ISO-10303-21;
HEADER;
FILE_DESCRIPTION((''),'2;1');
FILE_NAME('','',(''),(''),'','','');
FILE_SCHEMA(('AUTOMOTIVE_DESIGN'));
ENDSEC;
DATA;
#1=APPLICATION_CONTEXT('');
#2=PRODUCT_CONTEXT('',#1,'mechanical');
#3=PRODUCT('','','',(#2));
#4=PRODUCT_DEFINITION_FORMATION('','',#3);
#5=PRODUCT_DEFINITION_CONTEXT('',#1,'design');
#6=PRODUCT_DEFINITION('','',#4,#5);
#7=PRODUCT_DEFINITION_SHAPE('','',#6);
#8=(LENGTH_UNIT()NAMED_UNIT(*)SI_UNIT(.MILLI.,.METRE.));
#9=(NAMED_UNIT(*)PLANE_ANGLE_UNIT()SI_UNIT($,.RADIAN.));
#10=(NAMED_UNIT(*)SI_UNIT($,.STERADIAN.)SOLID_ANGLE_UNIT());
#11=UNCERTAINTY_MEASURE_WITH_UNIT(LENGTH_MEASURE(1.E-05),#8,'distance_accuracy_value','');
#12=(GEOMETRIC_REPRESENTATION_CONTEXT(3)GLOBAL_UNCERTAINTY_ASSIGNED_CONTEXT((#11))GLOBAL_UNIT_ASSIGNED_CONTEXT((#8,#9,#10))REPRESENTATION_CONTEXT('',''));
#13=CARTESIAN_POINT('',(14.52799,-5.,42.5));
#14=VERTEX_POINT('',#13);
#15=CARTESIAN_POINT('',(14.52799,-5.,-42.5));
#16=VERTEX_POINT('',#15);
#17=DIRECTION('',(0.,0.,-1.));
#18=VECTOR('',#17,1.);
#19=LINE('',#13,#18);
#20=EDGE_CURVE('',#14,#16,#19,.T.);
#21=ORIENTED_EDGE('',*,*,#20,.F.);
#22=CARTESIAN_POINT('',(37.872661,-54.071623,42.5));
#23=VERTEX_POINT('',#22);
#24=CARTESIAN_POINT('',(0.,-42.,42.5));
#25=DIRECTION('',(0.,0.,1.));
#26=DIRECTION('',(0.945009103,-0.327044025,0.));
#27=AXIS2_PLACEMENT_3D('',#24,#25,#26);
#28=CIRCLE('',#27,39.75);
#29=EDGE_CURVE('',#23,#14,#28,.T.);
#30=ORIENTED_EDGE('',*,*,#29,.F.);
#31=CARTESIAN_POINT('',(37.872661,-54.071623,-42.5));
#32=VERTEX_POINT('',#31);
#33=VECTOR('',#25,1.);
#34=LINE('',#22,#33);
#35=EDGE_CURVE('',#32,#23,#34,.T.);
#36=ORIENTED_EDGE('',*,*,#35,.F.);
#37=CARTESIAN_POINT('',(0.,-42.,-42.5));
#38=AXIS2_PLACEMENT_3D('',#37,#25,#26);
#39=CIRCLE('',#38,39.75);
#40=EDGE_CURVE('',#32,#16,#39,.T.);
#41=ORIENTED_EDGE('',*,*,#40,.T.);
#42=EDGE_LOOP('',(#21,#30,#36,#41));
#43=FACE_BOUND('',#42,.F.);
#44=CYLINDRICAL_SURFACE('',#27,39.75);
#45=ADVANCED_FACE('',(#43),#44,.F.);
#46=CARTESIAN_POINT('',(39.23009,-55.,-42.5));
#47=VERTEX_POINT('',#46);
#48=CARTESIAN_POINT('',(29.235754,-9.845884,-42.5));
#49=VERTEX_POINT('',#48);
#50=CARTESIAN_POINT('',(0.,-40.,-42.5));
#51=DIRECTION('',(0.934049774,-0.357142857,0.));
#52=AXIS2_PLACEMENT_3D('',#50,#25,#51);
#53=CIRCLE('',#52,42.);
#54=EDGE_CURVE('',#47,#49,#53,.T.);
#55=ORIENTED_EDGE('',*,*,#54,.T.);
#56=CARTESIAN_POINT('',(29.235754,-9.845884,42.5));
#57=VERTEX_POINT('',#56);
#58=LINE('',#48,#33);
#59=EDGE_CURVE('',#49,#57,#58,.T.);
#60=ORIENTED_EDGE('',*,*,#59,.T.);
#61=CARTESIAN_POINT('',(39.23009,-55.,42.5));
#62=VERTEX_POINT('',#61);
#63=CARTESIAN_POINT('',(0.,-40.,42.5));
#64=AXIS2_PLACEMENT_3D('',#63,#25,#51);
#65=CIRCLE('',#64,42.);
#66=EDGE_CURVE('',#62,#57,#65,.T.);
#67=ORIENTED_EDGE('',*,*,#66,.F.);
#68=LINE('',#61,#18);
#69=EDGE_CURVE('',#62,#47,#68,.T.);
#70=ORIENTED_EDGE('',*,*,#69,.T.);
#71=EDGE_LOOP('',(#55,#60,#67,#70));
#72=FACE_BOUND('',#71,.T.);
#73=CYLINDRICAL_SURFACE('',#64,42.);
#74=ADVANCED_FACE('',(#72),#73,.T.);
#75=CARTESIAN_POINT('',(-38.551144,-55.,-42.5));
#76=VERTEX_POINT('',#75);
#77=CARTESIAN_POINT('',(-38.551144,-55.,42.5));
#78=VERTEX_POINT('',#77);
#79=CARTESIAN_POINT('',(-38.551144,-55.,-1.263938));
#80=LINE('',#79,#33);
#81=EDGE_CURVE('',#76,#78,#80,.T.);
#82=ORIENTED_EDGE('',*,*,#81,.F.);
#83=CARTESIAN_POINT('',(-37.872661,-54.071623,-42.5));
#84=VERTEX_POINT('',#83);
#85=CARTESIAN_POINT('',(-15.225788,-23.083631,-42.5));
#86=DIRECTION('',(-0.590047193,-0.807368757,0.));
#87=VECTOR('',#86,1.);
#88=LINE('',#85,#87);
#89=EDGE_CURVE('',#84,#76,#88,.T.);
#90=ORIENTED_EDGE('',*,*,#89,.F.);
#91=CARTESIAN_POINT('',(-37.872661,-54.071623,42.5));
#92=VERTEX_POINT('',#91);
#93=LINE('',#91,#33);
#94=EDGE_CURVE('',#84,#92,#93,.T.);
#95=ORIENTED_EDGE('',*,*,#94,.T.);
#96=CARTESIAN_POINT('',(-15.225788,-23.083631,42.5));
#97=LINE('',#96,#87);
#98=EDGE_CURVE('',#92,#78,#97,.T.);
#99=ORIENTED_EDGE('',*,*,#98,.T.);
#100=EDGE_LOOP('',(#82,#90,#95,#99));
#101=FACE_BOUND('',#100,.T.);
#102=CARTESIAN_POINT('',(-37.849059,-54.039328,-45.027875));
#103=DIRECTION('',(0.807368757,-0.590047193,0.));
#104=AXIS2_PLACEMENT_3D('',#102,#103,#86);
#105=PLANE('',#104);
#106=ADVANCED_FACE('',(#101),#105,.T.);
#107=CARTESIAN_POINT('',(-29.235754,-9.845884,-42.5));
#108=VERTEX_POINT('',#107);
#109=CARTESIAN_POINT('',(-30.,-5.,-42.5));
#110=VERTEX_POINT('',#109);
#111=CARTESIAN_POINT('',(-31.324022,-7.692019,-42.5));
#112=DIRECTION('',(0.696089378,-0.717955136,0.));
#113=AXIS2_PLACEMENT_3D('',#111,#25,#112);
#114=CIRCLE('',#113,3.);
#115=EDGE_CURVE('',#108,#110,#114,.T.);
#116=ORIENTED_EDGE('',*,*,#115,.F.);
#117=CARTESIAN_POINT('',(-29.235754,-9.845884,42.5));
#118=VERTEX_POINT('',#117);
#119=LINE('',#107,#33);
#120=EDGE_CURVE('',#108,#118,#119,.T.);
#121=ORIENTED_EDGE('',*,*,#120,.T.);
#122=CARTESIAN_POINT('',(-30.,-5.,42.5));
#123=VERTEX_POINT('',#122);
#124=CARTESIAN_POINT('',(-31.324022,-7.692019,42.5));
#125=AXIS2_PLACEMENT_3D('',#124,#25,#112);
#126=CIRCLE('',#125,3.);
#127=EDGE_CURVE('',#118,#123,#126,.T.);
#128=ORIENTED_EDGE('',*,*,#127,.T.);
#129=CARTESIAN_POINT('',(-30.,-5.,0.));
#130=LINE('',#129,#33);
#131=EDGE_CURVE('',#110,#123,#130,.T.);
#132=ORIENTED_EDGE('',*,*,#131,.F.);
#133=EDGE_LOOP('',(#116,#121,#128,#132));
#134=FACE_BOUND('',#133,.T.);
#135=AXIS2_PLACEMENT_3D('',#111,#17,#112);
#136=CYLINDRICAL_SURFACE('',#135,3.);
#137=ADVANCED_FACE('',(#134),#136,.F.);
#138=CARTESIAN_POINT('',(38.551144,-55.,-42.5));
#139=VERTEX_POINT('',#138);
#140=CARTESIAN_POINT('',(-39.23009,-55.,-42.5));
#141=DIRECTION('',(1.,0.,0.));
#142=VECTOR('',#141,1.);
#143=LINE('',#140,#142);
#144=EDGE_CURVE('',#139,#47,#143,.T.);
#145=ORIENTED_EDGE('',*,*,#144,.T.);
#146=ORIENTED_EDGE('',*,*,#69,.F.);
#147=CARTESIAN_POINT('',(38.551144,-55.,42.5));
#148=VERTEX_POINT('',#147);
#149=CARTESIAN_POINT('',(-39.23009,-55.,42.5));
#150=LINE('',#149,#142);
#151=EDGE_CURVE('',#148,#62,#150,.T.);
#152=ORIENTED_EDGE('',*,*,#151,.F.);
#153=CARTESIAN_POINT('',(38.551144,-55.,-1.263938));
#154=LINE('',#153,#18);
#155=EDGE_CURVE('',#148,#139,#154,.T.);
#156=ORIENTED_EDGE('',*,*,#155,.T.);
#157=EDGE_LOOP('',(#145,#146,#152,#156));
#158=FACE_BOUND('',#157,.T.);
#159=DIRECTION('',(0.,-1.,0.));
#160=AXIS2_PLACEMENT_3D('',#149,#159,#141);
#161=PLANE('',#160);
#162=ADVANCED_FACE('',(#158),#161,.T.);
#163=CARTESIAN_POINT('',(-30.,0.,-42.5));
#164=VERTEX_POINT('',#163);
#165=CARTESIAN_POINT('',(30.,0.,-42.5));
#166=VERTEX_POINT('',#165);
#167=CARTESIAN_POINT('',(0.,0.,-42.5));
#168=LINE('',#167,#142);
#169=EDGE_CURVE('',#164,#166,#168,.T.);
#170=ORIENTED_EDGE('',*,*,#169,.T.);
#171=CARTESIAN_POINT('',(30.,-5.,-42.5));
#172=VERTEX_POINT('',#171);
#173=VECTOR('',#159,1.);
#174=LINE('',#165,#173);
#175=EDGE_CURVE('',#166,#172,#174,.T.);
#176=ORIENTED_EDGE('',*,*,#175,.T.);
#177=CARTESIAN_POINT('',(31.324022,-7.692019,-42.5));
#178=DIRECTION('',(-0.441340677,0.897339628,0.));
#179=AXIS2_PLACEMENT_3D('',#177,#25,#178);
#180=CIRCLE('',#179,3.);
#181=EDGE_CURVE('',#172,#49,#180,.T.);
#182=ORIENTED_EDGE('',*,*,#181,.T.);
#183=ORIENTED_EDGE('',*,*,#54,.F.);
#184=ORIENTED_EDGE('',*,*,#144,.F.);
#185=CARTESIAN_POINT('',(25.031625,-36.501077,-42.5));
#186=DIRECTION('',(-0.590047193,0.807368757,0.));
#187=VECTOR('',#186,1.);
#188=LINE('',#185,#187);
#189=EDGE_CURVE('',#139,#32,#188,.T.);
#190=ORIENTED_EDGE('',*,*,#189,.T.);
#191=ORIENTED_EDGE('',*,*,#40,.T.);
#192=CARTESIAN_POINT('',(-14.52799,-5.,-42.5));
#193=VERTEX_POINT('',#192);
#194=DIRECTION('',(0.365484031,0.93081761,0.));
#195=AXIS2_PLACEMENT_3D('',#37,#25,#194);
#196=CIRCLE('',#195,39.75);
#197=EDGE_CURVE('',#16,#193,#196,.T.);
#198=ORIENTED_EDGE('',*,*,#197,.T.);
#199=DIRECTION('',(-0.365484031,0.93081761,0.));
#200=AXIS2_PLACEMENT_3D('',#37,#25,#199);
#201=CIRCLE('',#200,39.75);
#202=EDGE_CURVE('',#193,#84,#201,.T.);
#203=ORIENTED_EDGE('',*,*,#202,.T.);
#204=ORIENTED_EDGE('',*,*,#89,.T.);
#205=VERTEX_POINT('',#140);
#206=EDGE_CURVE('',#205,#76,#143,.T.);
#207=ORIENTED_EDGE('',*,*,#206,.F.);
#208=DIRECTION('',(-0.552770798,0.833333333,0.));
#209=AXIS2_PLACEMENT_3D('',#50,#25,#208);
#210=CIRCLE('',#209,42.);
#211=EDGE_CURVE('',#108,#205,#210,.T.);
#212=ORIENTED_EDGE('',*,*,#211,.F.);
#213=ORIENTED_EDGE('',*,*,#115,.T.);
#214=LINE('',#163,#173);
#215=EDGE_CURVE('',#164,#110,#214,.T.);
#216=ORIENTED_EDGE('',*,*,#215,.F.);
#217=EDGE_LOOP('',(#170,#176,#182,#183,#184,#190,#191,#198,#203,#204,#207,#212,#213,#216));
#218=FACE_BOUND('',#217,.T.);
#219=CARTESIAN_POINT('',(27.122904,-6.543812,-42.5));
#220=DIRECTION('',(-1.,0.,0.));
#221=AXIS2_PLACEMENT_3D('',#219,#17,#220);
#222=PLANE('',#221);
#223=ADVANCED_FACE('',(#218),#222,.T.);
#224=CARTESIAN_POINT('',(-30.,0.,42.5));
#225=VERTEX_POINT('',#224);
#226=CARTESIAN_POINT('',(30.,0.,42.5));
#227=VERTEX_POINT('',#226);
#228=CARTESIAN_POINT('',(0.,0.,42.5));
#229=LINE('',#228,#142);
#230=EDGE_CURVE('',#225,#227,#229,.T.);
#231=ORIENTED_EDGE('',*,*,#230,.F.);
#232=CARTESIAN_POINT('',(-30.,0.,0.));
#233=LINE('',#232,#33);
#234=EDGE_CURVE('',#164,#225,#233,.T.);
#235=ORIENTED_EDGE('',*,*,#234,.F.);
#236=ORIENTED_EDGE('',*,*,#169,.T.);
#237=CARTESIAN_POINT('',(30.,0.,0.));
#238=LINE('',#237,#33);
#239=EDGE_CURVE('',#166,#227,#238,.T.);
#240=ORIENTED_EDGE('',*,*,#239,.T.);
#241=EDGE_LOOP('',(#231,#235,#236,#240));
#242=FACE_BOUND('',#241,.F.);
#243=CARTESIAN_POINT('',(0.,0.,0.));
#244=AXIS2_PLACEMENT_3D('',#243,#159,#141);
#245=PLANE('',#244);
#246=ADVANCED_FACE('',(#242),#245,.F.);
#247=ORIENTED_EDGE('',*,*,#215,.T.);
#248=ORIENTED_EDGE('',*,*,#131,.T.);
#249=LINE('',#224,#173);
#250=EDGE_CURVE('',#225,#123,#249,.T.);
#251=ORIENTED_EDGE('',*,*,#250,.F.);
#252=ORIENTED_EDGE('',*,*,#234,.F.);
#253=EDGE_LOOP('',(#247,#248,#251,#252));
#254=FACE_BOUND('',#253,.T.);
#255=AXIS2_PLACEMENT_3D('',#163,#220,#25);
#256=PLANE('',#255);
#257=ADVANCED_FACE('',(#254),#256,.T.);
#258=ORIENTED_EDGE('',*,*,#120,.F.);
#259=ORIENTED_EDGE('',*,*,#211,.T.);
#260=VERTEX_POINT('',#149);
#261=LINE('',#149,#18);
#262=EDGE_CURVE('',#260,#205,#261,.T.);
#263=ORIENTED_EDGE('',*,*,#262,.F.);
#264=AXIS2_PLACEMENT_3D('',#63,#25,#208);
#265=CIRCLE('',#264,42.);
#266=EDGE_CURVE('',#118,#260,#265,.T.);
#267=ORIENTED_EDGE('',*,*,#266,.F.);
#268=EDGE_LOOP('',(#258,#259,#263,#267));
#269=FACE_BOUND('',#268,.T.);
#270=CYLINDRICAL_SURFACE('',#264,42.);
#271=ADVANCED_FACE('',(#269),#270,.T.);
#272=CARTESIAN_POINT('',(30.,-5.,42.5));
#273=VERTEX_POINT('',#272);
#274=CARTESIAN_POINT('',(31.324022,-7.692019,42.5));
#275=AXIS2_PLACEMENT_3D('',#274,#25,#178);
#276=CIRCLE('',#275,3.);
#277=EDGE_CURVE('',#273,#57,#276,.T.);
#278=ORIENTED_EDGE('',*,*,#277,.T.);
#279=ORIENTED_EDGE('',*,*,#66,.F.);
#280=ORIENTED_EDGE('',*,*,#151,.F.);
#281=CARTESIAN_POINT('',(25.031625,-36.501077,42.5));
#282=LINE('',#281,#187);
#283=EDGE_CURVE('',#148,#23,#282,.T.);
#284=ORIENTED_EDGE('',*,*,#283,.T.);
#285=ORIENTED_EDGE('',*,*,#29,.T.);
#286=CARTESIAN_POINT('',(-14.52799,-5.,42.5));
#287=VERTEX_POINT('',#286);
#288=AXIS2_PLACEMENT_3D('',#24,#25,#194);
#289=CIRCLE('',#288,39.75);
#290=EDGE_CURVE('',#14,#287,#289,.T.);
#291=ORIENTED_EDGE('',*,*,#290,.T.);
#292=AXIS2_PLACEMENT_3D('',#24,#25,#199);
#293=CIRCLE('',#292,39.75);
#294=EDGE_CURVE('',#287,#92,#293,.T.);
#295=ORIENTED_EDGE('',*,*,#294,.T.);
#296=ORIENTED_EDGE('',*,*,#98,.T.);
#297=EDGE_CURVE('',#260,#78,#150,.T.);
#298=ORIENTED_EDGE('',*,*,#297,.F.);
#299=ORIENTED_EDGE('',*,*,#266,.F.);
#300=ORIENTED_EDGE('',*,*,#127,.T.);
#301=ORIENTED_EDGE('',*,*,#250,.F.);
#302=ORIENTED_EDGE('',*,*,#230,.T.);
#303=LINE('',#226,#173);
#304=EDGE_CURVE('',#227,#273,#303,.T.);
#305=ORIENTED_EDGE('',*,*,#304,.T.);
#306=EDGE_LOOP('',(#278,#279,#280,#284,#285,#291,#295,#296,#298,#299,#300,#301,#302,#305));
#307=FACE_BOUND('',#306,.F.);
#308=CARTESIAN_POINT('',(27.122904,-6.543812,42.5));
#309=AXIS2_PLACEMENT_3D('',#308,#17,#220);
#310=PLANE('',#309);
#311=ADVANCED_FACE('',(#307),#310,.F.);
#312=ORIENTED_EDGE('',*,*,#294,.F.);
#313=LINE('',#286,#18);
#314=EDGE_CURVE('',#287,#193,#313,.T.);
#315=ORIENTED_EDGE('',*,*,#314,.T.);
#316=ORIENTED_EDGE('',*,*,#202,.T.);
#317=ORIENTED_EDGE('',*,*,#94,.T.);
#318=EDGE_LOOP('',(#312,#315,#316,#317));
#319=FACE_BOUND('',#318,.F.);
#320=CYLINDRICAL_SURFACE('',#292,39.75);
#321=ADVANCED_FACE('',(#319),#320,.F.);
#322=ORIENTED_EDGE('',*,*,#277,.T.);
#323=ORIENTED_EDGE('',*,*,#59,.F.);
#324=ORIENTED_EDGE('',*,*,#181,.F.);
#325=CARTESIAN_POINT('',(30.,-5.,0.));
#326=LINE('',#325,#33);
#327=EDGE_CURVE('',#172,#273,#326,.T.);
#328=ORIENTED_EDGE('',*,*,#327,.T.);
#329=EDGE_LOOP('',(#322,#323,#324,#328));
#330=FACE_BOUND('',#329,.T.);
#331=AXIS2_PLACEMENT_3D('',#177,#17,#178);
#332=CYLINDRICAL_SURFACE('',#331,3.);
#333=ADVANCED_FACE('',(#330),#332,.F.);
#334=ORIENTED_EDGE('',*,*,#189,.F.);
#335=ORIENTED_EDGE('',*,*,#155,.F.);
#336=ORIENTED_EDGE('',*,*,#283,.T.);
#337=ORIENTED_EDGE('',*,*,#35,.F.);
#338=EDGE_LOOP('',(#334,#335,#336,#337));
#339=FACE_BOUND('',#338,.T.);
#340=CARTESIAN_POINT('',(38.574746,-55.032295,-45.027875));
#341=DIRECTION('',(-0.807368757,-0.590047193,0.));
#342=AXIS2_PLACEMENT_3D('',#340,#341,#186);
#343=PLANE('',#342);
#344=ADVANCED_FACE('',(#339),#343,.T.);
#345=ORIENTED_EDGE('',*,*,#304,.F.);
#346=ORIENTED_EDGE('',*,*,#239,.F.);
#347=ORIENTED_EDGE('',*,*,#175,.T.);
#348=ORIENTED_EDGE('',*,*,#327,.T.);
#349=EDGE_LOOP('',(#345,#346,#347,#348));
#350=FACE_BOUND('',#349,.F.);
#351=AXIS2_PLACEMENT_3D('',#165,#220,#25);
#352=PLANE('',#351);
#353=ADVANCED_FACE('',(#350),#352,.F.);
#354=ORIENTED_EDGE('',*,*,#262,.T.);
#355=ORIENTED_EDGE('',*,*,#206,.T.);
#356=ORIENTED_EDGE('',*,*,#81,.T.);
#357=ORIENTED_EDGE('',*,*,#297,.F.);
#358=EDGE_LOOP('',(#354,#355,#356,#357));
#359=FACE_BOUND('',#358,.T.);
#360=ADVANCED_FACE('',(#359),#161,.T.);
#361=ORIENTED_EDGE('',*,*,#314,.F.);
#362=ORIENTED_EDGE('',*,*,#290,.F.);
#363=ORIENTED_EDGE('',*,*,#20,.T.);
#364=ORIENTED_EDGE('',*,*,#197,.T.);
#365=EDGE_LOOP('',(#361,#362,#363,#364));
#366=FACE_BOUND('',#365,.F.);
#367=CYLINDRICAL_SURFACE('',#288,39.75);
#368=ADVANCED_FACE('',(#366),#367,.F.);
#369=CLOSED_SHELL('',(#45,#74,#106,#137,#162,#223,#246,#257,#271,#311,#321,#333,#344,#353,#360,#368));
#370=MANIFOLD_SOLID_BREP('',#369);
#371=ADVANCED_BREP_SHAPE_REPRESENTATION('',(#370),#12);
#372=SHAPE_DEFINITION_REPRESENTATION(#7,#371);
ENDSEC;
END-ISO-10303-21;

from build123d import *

# Parameters (mm, degrees)
F0_W        = 60
F0_H        = 85
F1_DEPTH    = 5
F3_DEPTH    = 85
F4_DEPTH    = 85
F5_T1_DEPTH = 85
F6_T1_DEPTH = 90.0557507085


# Not quite as in the source:
# - a fillet or chamfer that OpenCascade refuses, or shapes differently, is made with other operations: its cross-section is extruded or revolved along the edge and cut away or added


with BuildPart() as f1:
    # F0 (on Front) → F1 (new body)
    with BuildSketch(Plane.XZ):
        Rectangle(F0_W, F0_H)
    extrude(amount=F1_DEPTH)

    # F2 (on face) → F3 (join, through all)
    with BuildSketch(Plane.XY.offset(42.5)):
        with BuildLine():
            Line((-14.5279902258, -5), (-23.2163735325, -5))
            ThreePointArc((-23.2163735325, -5), (-39.9986276925, -27.1894659474), (-39.2300904919, -55))
            Line((-39.2300904919, -55), (-37.5641118623, -55))
            ThreePointArc((-37.5641118623, -55), (-36.1025868185, -25.3667283731), (-14.5279902258, -5))
        make_face()
        with BuildLine():
            Line((23.2163735325, -5), (14.5279902258, -5))
            ThreePointArc((14.5279902258, -5), (36.1025868185, -25.3667283731), (37.5641118623, -55))
            Line((37.5641118623, -55), (39.2300904919, -55))
            ThreePointArc((39.2300904919, -55), (39.9986276925, -27.1894659474), (23.2163735325, -5))
        make_face()
        with BuildLine():
            ThreePointArc((14.5279902258, -5), (0, -2.25), (-14.5279902258, -5))
            Line((-14.5279902258, -5), (14.5279902258, -5))
        make_face()
        with BuildLine():
            Line((14.5279902258, -5), (-14.5279902258, -5))
            ThreePointArc((-14.5279902258, -5), (-36.1025868185, -25.3667283731), (-37.5641118623, -55))
            Line((-37.5641118623, -55), (37.5641118623, -55))
            ThreePointArc((37.5641118623, -55), (36.1025868185, -25.3667283731), (14.5279902258, -5))
        make_face()
    extrude(amount=-F3_DEPTH)

    # F2 (on face) → F4 (cut, through all)
    with BuildSketch(Plane.XY.offset(42.5)):
        with BuildLine():
            Line((14.5279902258, -5), (-14.5279902258, -5))
            ThreePointArc((-14.5279902258, -5), (-36.1025868185, -25.3667283731), (-37.5641118623, -55))
            Line((-37.5641118623, -55), (37.5641118623, -55))
            ThreePointArc((37.5641118623, -55), (36.1025868185, -25.3667283731), (14.5279902258, -5))
        make_face()
        with BuildLine():
            ThreePointArc((14.5279902258, -5), (0, -2.25), (-14.5279902258, -5))
            Line((-14.5279902258, -5), (14.5279902258, -5))
        make_face()
    extrude(amount=-F4_DEPTH, mode=Mode.SUBTRACT)

    # F5: fillet of radius 3 on 2 edges, made by hand

    # F5_s2 → F5_t1 (join)
    with BuildSketch(Plane.XY.offset(-42.5)):
        with BuildLine():
            ThreePointArc((30, -5), (28.3606490054, -7.224664287), (29.2357538945, -9.8458842905))
            ThreePointArc((29.2357538945, -9.8458842905), (26.3377498383, -7.2842097229), (23.2163735325, -5))
            Line((23.2163735325, -5), (30, -5))
        make_face()
        with BuildLine():
            ThreePointArc((-29.2357538945, -9.8458842905), (-28.3606490054, -7.224664287), (-30, -5))
            Line((-30, -5), (-23.2163735325, -5))
            ThreePointArc((-23.2163735325, -5), (-26.3377498383, -7.2842097229), (-29.2357538945, -9.8458842905))
        make_face()
    extrude(amount=F5_T1_DEPTH)

    # F6: chamfer of 1 on 2 edges, made by hand

    # F6_s2 → F6_t1 (cut)
    with BuildSketch(Plane.XY.offset(-45.0278753542)):
        with BuildLine():
            Line((-37.8490587869, -54.0393279007), (-38.5747461473, -55.0322947503))
            Line((-38.5747461473, -55.0322947503), (-38.5747461473, -55.0522947503))
            ThreePointArc((-38.5747461473, -55.0522947503), (-38.0694290048, -55.02), (-37.5641118623, -55.02))
            Line((-37.5641118623, -55.02), (-37.5452116802, -54.9934591195))
            ThreePointArc((-37.5452116802, -54.9934591195), (-37.7059205116, -54.5194432134), (-37.8300033601, -54.0332541283))
            Line((-37.8300033601, -54.0332541283), (-37.8490587869, -54.0393279007))
        make_face()
        with BuildLine():
            Line((38.5747461473, -55.0322947503), (37.8490587869, -54.0393279007))
            Line((37.8490587869, -54.0393279007), (37.8300033601, -54.0332541283))
            ThreePointArc((37.8300033601, -54.0332541283), (37.7059205116, -54.5194432134), (37.5452116802, -54.9934591195))
            Line((37.5452116802, -54.9934591195), (37.5641118623, -55.02))
            ThreePointArc((37.5641118623, -55.02), (38.0694290048, -55.02), (38.5747461473, -55.0522947503))
            Line((38.5747461473, -55.0522947503), (38.5747461473, -55.0322947503))
        make_face()
    extrude(amount=F6_T1_DEPTH, mode=Mode.SUBTRACT)


solid = f1.part
